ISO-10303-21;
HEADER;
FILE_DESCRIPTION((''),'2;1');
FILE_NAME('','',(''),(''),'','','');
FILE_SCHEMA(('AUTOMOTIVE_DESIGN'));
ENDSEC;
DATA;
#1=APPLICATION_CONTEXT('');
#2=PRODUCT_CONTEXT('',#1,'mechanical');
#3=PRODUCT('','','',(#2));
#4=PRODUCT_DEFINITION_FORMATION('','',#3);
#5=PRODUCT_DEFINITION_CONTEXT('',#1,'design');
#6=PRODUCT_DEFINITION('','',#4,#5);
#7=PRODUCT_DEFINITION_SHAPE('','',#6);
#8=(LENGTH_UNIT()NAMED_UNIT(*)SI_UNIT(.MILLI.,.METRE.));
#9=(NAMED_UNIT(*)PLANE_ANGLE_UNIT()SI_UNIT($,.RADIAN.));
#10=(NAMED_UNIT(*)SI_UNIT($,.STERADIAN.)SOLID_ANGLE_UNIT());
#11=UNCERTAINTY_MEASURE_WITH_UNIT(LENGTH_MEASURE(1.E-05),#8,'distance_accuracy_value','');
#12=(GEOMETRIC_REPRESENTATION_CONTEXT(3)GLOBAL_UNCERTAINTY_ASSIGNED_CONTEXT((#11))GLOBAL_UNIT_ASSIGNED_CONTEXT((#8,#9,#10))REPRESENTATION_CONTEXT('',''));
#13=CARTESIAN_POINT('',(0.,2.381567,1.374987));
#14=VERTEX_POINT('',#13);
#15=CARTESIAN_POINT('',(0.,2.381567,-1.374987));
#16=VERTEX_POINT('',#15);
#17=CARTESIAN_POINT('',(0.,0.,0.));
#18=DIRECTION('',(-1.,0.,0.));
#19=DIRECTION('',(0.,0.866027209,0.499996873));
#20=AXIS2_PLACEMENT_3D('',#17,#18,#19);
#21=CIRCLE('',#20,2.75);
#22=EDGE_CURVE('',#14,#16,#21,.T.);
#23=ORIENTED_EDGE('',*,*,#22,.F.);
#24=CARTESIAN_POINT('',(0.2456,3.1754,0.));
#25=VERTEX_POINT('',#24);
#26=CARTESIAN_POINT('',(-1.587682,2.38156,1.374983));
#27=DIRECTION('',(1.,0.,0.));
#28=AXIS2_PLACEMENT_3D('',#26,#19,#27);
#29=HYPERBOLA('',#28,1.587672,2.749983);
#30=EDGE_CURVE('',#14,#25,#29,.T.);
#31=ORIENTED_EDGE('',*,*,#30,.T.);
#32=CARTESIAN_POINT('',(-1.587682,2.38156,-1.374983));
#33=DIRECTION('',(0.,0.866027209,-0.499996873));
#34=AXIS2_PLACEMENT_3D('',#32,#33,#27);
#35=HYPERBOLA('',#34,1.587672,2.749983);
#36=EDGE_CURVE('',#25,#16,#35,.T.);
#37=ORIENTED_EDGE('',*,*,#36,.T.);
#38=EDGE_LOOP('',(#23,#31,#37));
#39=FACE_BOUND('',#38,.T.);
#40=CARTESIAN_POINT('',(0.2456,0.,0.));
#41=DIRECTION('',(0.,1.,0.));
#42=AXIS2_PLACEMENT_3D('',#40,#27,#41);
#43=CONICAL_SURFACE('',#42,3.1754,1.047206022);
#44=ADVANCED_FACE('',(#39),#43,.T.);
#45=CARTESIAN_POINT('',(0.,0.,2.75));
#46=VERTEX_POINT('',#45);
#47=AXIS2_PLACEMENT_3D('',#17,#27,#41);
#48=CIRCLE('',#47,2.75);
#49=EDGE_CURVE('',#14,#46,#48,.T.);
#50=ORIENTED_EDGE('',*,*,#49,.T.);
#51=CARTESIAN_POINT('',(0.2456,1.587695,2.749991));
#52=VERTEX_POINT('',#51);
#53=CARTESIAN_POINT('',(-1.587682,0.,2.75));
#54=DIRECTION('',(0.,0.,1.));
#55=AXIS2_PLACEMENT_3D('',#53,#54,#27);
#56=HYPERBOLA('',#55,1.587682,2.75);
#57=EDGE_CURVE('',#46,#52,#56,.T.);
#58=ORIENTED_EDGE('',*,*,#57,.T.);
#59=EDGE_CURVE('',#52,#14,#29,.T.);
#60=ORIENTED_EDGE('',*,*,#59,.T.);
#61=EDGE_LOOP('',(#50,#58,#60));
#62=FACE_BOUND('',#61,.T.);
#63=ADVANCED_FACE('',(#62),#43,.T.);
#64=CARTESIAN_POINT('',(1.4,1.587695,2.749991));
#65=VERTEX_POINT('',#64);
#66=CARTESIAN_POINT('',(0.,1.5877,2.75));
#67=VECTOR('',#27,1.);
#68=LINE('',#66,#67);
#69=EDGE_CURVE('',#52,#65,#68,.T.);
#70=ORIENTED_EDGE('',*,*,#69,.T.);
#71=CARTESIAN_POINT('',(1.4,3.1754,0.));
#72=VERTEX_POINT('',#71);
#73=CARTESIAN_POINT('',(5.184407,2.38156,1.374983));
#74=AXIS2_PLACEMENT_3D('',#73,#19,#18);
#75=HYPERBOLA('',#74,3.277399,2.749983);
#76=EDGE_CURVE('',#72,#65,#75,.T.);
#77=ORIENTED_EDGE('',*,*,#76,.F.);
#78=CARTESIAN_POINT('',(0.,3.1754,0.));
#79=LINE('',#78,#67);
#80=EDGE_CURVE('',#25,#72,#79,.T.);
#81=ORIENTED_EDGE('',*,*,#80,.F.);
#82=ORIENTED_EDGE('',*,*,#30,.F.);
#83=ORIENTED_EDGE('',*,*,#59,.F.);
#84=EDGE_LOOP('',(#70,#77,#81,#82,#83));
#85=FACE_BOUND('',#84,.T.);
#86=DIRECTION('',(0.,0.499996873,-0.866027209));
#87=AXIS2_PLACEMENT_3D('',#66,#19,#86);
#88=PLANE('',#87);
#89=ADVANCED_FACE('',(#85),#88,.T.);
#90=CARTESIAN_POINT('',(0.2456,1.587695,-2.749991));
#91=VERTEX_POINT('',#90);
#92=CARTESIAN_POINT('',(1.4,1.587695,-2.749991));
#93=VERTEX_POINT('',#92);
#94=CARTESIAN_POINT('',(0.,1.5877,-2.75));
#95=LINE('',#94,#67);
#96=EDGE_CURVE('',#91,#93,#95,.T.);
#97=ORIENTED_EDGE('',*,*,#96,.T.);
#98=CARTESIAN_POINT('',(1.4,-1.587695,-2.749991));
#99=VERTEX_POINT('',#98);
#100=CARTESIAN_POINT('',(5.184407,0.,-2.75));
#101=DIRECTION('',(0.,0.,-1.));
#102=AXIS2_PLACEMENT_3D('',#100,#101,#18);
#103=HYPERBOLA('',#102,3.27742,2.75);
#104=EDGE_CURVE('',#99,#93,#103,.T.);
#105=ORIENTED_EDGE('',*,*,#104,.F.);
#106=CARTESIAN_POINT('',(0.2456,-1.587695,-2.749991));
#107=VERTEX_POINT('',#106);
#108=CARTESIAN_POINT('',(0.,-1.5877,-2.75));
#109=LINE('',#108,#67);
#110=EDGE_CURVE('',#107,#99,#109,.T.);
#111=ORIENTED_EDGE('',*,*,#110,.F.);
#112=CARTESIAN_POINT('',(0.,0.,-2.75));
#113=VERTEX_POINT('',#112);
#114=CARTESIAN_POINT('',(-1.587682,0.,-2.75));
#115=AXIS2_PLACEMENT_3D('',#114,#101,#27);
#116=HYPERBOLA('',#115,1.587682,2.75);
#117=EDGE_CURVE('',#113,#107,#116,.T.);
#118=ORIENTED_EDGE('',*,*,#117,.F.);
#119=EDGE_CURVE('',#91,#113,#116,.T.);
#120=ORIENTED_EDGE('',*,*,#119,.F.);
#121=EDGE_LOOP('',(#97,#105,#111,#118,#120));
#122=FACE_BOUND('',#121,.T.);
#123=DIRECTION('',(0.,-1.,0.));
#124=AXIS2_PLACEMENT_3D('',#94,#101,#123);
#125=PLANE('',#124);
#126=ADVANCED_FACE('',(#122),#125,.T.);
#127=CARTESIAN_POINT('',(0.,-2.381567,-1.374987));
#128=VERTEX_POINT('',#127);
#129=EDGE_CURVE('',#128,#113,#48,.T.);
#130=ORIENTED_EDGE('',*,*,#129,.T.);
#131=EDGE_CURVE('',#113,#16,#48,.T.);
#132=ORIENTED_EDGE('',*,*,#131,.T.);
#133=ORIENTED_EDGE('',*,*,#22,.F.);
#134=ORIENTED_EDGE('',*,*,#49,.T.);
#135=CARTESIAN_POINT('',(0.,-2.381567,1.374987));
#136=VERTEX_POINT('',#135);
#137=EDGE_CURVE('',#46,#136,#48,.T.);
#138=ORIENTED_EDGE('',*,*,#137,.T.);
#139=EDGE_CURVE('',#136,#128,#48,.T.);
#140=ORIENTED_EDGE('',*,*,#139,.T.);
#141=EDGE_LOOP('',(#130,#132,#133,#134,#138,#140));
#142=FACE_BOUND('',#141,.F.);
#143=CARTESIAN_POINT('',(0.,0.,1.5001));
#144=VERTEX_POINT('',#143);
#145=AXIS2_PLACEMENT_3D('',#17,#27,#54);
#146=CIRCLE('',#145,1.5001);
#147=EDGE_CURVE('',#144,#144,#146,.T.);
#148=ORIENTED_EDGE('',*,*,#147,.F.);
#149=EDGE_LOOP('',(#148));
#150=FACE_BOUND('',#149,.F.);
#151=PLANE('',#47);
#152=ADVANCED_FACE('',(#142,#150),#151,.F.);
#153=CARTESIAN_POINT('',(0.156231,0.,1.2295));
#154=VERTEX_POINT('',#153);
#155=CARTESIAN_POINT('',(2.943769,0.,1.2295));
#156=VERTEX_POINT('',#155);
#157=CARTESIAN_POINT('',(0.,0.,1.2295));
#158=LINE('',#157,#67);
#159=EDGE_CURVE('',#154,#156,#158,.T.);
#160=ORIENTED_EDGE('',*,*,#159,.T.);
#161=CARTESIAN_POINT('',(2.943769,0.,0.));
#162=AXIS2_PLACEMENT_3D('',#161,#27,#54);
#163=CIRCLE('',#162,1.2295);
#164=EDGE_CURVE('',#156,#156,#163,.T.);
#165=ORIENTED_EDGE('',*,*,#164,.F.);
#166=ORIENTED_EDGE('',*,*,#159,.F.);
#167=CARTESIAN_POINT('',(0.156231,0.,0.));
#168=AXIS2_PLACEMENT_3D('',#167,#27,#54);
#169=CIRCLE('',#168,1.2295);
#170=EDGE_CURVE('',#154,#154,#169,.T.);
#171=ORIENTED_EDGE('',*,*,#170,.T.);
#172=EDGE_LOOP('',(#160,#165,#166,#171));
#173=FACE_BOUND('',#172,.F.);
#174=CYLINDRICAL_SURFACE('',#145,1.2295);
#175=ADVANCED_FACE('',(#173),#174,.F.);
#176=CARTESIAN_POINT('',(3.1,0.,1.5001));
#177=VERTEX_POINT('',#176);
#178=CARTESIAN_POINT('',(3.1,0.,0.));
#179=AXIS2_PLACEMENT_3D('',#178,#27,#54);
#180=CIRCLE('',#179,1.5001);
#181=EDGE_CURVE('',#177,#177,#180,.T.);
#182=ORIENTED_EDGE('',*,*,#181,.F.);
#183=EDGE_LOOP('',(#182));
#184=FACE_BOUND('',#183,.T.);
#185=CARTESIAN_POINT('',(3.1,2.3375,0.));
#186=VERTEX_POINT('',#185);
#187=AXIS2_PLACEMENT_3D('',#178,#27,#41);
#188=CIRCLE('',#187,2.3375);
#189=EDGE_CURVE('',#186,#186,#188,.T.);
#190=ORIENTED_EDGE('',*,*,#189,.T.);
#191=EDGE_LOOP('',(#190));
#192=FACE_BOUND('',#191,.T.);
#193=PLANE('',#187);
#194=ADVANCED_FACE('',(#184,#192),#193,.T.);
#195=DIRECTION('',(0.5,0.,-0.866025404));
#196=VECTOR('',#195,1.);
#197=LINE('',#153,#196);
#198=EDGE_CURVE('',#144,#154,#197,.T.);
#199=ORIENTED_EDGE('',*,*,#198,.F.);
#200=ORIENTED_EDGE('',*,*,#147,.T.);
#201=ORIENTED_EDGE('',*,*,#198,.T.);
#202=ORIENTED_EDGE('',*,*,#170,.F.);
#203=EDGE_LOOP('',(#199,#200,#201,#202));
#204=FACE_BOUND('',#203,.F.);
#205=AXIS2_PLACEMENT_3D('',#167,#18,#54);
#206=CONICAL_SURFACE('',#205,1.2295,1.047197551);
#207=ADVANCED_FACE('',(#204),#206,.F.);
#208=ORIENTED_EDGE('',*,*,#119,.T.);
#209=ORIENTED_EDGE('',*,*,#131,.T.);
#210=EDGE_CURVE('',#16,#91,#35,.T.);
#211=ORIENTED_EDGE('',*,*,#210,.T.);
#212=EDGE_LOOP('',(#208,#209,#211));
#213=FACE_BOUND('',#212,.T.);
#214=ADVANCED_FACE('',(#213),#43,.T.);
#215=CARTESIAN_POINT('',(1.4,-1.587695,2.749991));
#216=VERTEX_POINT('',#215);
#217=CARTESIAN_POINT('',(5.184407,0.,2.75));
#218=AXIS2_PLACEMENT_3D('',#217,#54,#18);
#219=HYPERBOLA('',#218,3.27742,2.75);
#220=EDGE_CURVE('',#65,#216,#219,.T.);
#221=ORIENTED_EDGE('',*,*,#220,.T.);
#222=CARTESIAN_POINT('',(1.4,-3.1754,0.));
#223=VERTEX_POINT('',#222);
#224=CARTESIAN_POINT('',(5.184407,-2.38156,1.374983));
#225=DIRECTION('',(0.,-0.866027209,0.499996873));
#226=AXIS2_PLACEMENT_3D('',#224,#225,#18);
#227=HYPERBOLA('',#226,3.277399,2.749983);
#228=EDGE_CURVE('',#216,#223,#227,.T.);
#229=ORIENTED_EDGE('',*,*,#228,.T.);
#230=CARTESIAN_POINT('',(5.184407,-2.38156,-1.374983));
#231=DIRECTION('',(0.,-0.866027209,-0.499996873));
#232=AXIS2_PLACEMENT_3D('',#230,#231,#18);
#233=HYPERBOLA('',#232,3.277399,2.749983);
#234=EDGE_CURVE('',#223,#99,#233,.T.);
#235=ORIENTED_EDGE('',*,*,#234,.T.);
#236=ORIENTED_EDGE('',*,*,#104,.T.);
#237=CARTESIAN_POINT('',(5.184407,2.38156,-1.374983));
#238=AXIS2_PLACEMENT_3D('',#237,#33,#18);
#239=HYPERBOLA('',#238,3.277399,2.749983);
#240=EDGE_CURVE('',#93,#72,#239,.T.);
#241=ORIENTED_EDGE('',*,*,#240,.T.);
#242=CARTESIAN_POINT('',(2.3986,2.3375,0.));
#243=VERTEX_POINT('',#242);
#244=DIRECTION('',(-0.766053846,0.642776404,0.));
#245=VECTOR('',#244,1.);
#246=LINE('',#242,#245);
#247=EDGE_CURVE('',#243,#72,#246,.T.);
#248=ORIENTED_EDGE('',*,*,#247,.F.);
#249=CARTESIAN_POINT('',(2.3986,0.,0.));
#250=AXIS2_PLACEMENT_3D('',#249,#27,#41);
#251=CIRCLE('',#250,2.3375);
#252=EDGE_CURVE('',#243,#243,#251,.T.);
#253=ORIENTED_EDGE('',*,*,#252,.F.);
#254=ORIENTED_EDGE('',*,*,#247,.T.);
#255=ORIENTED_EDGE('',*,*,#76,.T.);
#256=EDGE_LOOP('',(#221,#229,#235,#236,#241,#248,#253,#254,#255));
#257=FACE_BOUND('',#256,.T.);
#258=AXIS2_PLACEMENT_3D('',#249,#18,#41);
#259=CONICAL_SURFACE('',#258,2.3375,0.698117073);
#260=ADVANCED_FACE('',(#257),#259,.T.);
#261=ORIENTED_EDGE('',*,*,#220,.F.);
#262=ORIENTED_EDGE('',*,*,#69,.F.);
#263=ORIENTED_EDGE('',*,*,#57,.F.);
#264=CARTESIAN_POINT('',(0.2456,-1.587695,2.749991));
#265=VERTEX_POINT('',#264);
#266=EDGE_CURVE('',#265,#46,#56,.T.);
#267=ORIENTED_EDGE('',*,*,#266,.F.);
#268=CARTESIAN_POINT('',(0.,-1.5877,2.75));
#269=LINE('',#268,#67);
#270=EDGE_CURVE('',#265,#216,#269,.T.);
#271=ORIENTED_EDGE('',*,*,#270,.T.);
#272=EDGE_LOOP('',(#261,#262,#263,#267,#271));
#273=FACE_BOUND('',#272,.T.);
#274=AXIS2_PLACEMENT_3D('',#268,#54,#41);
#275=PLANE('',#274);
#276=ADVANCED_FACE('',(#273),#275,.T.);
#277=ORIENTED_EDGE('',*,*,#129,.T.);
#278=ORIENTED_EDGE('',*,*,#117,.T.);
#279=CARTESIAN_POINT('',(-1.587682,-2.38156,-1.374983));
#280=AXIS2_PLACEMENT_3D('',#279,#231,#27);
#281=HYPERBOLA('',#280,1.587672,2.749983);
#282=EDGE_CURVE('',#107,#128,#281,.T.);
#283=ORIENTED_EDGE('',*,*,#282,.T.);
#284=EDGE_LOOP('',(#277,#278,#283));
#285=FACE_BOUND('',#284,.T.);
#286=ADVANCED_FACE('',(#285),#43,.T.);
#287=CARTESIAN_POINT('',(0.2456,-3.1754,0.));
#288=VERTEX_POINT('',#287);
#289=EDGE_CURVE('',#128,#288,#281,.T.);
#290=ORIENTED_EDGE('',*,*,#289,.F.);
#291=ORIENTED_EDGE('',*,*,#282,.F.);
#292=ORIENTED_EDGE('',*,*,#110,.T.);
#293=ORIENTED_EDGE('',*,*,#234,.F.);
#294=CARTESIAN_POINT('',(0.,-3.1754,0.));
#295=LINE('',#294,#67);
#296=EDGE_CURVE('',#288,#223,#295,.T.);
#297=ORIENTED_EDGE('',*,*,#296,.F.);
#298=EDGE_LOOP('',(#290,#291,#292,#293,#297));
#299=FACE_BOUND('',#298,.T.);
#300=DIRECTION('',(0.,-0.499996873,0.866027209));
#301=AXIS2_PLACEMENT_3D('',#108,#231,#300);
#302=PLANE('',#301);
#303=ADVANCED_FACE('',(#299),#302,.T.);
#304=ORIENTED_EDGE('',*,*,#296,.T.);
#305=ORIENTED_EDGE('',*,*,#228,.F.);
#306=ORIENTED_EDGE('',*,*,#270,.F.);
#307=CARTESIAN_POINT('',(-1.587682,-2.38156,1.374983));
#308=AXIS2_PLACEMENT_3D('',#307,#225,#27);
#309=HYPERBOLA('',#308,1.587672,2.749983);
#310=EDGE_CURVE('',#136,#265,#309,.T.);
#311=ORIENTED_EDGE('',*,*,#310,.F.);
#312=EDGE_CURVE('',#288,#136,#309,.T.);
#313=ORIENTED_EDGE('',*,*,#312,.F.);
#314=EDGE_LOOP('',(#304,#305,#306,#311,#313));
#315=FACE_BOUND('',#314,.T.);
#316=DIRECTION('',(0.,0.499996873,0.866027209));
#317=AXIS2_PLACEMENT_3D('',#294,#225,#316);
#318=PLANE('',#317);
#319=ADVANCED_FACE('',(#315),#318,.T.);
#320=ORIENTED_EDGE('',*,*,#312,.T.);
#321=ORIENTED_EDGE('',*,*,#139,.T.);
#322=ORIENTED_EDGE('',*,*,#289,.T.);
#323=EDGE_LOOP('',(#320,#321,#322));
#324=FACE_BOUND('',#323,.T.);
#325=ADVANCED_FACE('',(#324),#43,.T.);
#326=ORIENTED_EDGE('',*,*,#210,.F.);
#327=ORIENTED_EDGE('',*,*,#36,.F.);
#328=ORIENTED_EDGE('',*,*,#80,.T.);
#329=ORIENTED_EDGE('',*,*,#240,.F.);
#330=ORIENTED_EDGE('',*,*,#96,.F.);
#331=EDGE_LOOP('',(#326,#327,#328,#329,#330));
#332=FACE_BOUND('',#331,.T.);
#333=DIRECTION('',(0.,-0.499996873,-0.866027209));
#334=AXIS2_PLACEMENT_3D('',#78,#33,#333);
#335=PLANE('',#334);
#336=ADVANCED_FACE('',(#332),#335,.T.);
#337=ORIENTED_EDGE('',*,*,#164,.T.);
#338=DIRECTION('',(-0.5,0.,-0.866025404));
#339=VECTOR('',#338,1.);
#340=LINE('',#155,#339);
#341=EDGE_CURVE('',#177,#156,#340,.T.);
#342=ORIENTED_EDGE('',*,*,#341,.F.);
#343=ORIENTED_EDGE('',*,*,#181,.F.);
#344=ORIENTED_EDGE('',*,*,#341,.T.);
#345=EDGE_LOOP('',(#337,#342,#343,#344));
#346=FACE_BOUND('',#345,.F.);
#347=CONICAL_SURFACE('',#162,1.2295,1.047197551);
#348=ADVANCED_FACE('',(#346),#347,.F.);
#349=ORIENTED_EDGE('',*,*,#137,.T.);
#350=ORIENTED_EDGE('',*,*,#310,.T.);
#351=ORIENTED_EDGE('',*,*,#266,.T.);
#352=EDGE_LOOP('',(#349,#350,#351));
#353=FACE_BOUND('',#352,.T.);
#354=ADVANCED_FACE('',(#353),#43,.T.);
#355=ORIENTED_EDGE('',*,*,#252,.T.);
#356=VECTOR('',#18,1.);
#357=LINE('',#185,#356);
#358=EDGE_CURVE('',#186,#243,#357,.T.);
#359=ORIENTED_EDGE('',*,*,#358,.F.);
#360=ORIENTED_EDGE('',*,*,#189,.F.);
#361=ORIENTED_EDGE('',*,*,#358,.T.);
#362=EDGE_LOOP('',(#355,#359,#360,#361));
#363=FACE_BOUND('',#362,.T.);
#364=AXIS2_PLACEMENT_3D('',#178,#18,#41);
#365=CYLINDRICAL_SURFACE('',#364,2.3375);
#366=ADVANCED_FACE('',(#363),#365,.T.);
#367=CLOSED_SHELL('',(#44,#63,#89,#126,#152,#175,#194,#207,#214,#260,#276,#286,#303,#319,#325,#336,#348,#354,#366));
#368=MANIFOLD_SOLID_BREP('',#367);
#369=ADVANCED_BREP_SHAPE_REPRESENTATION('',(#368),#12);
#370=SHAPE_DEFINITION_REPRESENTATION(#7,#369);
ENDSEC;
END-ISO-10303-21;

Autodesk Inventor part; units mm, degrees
ref_plane "YZ Plane" through (0, 0, 0) normal (1, 0, 0) x (0, 1, 0)
ref_plane "XZ Plane" through (0, 0, 0) normal (0, 1, 0) x (-1, 0, 0)
sketch "Szkic1" plane through (0, 0, 0) normal (1, 0, 0) x (0, 1, 0)
  line L0 (-3.1754, 0) -> (-1.5877, 2.75)
  line L1 (-1.5877, 2.75) -> (1.5877, 2.75)
  line L2 (1.5877, 2.75) -> (3.1754, 0)
  line L3 (3.1754, 0) -> (1.5877, -2.75)
  line L4 (1.5877, -2.75) -> (-1.5877, -2.75)
  line L5 (-1.5877, -2.75) -> (-3.1754, 0)
  point P0 (0, 0)
  point P1 (0, 0)
  dimension "d0" = 6.3509
extrude "Bryła" add sketch "Szkic1" along normal blind 3.1
sketch "Szkic2" plane through (0, 0, 0) normal (-1, 0, 0) x (0, 0, 1)
  line L0 (0, -4.4456) -> (0, 4.4456) projected
  line L1 (-3.85, 0) -> (3.85, 0) projected
  point P0 (0, 0)
hole "Gwint" at (0, 0, 0) direction (1, 0, 0) diameter 2.459 end through all thread size "M3x0.5" class "6H" standard "ANSI Metric M Profile"
chamfer "Faza1" distance 0.2706 angle 30 1 edges at (0, 0, -1.2295) measured on face at (0, -1.925, -1.1495)
chamfer "Faza2" distance 0.2706 angle 30 1 edges at (3.1, 0, -1.2295) measured on face at (3.1, -1.925, -1.1495)
sketch "Szkic3" plane through (0, 0, 0) normal (0, 0, 1) x (1, 0, 0)
  line L0 (0, 1.5877) -> (0, 3.1754) projected
  line L1 (0, 3.1754) -> (3.1, 3.1754) projected
  line L2 (3.1, 1.5877) -> (3.1, 3.1754) projected
  line L3 (-0.62, 0) -> (3.72, 0) projected
  line L4 (0.2456, 3.1754) -> (0, 2.75)
  line L5 (3.1, 2.3375) -> (2.3986, 2.3375)
  line L6 (2.3986, 2.3375) -> (1.4, 3.1754)
  dimension "d3" = 30
  dimension "d5" = 5.5
  dimension "d6" = 4.675
  dimension "d8" = 50
  dimension "d9" = 1.4
revolve "Faza3" cut sketch "Szkic3" angle 360 about axis through (-10, 0, 0) along (1, 0, 0)
ref_plane "Work Plane1" through (8.9551, 0, 0) normal (0, 0, 1) x (-1, 0, 0)
equation "\"d0\" = 1.1547 * SW"
equation "\"d1\" = KOH"
equation "\"d3\" = ANG1"
equation "\"d5\" = SW0"
equation "\"d6\" = SW1"
equation "\"d8\" = ANG2"
equation "\"d9\" = KOH1"
equation "\"d10\" = -0.5 * GD1 + 0.5 * NND"
equation "\"d39\" = -0.5 * GD1 + 0.5 * NND"
equation "\"d12\" = -0.5 * GD1 + 0.5 * NND"
equation "\"d40\" = -0.5 * GD1 + 0.5 * NND"
equation "\"ANG1\" = 30deg"
equation "\"ANG2\" = 50deg"
equation "\"NND\" = 3"
equation "\"KOH\" = 3.1"
equation "\"SW\" = 5.5"
equation "\"SW0\" = SW"
equation "\"SW1\" = 0.85 * SW"
equation "\"KOH1\" = 1.4"
equation "\"GUL\" = 0.541266 * PTC"
equation "\"THREADDIA\" = 3"
equation "\"TOA\" = 30deg"
equation "\"PTC\" = 0.5"
equation "\"E0\" = 1.155 * SW"
equation "\"GAL\" = 0.541266 * PTC"
equation "\"GD1\" = 2.458734"
properties part number "ANSI B18.16.3M - Klasa właściwości 5 i 10 - Metryczny M3 x 0.5 Typ metalowy" material "Stal, miękka"
